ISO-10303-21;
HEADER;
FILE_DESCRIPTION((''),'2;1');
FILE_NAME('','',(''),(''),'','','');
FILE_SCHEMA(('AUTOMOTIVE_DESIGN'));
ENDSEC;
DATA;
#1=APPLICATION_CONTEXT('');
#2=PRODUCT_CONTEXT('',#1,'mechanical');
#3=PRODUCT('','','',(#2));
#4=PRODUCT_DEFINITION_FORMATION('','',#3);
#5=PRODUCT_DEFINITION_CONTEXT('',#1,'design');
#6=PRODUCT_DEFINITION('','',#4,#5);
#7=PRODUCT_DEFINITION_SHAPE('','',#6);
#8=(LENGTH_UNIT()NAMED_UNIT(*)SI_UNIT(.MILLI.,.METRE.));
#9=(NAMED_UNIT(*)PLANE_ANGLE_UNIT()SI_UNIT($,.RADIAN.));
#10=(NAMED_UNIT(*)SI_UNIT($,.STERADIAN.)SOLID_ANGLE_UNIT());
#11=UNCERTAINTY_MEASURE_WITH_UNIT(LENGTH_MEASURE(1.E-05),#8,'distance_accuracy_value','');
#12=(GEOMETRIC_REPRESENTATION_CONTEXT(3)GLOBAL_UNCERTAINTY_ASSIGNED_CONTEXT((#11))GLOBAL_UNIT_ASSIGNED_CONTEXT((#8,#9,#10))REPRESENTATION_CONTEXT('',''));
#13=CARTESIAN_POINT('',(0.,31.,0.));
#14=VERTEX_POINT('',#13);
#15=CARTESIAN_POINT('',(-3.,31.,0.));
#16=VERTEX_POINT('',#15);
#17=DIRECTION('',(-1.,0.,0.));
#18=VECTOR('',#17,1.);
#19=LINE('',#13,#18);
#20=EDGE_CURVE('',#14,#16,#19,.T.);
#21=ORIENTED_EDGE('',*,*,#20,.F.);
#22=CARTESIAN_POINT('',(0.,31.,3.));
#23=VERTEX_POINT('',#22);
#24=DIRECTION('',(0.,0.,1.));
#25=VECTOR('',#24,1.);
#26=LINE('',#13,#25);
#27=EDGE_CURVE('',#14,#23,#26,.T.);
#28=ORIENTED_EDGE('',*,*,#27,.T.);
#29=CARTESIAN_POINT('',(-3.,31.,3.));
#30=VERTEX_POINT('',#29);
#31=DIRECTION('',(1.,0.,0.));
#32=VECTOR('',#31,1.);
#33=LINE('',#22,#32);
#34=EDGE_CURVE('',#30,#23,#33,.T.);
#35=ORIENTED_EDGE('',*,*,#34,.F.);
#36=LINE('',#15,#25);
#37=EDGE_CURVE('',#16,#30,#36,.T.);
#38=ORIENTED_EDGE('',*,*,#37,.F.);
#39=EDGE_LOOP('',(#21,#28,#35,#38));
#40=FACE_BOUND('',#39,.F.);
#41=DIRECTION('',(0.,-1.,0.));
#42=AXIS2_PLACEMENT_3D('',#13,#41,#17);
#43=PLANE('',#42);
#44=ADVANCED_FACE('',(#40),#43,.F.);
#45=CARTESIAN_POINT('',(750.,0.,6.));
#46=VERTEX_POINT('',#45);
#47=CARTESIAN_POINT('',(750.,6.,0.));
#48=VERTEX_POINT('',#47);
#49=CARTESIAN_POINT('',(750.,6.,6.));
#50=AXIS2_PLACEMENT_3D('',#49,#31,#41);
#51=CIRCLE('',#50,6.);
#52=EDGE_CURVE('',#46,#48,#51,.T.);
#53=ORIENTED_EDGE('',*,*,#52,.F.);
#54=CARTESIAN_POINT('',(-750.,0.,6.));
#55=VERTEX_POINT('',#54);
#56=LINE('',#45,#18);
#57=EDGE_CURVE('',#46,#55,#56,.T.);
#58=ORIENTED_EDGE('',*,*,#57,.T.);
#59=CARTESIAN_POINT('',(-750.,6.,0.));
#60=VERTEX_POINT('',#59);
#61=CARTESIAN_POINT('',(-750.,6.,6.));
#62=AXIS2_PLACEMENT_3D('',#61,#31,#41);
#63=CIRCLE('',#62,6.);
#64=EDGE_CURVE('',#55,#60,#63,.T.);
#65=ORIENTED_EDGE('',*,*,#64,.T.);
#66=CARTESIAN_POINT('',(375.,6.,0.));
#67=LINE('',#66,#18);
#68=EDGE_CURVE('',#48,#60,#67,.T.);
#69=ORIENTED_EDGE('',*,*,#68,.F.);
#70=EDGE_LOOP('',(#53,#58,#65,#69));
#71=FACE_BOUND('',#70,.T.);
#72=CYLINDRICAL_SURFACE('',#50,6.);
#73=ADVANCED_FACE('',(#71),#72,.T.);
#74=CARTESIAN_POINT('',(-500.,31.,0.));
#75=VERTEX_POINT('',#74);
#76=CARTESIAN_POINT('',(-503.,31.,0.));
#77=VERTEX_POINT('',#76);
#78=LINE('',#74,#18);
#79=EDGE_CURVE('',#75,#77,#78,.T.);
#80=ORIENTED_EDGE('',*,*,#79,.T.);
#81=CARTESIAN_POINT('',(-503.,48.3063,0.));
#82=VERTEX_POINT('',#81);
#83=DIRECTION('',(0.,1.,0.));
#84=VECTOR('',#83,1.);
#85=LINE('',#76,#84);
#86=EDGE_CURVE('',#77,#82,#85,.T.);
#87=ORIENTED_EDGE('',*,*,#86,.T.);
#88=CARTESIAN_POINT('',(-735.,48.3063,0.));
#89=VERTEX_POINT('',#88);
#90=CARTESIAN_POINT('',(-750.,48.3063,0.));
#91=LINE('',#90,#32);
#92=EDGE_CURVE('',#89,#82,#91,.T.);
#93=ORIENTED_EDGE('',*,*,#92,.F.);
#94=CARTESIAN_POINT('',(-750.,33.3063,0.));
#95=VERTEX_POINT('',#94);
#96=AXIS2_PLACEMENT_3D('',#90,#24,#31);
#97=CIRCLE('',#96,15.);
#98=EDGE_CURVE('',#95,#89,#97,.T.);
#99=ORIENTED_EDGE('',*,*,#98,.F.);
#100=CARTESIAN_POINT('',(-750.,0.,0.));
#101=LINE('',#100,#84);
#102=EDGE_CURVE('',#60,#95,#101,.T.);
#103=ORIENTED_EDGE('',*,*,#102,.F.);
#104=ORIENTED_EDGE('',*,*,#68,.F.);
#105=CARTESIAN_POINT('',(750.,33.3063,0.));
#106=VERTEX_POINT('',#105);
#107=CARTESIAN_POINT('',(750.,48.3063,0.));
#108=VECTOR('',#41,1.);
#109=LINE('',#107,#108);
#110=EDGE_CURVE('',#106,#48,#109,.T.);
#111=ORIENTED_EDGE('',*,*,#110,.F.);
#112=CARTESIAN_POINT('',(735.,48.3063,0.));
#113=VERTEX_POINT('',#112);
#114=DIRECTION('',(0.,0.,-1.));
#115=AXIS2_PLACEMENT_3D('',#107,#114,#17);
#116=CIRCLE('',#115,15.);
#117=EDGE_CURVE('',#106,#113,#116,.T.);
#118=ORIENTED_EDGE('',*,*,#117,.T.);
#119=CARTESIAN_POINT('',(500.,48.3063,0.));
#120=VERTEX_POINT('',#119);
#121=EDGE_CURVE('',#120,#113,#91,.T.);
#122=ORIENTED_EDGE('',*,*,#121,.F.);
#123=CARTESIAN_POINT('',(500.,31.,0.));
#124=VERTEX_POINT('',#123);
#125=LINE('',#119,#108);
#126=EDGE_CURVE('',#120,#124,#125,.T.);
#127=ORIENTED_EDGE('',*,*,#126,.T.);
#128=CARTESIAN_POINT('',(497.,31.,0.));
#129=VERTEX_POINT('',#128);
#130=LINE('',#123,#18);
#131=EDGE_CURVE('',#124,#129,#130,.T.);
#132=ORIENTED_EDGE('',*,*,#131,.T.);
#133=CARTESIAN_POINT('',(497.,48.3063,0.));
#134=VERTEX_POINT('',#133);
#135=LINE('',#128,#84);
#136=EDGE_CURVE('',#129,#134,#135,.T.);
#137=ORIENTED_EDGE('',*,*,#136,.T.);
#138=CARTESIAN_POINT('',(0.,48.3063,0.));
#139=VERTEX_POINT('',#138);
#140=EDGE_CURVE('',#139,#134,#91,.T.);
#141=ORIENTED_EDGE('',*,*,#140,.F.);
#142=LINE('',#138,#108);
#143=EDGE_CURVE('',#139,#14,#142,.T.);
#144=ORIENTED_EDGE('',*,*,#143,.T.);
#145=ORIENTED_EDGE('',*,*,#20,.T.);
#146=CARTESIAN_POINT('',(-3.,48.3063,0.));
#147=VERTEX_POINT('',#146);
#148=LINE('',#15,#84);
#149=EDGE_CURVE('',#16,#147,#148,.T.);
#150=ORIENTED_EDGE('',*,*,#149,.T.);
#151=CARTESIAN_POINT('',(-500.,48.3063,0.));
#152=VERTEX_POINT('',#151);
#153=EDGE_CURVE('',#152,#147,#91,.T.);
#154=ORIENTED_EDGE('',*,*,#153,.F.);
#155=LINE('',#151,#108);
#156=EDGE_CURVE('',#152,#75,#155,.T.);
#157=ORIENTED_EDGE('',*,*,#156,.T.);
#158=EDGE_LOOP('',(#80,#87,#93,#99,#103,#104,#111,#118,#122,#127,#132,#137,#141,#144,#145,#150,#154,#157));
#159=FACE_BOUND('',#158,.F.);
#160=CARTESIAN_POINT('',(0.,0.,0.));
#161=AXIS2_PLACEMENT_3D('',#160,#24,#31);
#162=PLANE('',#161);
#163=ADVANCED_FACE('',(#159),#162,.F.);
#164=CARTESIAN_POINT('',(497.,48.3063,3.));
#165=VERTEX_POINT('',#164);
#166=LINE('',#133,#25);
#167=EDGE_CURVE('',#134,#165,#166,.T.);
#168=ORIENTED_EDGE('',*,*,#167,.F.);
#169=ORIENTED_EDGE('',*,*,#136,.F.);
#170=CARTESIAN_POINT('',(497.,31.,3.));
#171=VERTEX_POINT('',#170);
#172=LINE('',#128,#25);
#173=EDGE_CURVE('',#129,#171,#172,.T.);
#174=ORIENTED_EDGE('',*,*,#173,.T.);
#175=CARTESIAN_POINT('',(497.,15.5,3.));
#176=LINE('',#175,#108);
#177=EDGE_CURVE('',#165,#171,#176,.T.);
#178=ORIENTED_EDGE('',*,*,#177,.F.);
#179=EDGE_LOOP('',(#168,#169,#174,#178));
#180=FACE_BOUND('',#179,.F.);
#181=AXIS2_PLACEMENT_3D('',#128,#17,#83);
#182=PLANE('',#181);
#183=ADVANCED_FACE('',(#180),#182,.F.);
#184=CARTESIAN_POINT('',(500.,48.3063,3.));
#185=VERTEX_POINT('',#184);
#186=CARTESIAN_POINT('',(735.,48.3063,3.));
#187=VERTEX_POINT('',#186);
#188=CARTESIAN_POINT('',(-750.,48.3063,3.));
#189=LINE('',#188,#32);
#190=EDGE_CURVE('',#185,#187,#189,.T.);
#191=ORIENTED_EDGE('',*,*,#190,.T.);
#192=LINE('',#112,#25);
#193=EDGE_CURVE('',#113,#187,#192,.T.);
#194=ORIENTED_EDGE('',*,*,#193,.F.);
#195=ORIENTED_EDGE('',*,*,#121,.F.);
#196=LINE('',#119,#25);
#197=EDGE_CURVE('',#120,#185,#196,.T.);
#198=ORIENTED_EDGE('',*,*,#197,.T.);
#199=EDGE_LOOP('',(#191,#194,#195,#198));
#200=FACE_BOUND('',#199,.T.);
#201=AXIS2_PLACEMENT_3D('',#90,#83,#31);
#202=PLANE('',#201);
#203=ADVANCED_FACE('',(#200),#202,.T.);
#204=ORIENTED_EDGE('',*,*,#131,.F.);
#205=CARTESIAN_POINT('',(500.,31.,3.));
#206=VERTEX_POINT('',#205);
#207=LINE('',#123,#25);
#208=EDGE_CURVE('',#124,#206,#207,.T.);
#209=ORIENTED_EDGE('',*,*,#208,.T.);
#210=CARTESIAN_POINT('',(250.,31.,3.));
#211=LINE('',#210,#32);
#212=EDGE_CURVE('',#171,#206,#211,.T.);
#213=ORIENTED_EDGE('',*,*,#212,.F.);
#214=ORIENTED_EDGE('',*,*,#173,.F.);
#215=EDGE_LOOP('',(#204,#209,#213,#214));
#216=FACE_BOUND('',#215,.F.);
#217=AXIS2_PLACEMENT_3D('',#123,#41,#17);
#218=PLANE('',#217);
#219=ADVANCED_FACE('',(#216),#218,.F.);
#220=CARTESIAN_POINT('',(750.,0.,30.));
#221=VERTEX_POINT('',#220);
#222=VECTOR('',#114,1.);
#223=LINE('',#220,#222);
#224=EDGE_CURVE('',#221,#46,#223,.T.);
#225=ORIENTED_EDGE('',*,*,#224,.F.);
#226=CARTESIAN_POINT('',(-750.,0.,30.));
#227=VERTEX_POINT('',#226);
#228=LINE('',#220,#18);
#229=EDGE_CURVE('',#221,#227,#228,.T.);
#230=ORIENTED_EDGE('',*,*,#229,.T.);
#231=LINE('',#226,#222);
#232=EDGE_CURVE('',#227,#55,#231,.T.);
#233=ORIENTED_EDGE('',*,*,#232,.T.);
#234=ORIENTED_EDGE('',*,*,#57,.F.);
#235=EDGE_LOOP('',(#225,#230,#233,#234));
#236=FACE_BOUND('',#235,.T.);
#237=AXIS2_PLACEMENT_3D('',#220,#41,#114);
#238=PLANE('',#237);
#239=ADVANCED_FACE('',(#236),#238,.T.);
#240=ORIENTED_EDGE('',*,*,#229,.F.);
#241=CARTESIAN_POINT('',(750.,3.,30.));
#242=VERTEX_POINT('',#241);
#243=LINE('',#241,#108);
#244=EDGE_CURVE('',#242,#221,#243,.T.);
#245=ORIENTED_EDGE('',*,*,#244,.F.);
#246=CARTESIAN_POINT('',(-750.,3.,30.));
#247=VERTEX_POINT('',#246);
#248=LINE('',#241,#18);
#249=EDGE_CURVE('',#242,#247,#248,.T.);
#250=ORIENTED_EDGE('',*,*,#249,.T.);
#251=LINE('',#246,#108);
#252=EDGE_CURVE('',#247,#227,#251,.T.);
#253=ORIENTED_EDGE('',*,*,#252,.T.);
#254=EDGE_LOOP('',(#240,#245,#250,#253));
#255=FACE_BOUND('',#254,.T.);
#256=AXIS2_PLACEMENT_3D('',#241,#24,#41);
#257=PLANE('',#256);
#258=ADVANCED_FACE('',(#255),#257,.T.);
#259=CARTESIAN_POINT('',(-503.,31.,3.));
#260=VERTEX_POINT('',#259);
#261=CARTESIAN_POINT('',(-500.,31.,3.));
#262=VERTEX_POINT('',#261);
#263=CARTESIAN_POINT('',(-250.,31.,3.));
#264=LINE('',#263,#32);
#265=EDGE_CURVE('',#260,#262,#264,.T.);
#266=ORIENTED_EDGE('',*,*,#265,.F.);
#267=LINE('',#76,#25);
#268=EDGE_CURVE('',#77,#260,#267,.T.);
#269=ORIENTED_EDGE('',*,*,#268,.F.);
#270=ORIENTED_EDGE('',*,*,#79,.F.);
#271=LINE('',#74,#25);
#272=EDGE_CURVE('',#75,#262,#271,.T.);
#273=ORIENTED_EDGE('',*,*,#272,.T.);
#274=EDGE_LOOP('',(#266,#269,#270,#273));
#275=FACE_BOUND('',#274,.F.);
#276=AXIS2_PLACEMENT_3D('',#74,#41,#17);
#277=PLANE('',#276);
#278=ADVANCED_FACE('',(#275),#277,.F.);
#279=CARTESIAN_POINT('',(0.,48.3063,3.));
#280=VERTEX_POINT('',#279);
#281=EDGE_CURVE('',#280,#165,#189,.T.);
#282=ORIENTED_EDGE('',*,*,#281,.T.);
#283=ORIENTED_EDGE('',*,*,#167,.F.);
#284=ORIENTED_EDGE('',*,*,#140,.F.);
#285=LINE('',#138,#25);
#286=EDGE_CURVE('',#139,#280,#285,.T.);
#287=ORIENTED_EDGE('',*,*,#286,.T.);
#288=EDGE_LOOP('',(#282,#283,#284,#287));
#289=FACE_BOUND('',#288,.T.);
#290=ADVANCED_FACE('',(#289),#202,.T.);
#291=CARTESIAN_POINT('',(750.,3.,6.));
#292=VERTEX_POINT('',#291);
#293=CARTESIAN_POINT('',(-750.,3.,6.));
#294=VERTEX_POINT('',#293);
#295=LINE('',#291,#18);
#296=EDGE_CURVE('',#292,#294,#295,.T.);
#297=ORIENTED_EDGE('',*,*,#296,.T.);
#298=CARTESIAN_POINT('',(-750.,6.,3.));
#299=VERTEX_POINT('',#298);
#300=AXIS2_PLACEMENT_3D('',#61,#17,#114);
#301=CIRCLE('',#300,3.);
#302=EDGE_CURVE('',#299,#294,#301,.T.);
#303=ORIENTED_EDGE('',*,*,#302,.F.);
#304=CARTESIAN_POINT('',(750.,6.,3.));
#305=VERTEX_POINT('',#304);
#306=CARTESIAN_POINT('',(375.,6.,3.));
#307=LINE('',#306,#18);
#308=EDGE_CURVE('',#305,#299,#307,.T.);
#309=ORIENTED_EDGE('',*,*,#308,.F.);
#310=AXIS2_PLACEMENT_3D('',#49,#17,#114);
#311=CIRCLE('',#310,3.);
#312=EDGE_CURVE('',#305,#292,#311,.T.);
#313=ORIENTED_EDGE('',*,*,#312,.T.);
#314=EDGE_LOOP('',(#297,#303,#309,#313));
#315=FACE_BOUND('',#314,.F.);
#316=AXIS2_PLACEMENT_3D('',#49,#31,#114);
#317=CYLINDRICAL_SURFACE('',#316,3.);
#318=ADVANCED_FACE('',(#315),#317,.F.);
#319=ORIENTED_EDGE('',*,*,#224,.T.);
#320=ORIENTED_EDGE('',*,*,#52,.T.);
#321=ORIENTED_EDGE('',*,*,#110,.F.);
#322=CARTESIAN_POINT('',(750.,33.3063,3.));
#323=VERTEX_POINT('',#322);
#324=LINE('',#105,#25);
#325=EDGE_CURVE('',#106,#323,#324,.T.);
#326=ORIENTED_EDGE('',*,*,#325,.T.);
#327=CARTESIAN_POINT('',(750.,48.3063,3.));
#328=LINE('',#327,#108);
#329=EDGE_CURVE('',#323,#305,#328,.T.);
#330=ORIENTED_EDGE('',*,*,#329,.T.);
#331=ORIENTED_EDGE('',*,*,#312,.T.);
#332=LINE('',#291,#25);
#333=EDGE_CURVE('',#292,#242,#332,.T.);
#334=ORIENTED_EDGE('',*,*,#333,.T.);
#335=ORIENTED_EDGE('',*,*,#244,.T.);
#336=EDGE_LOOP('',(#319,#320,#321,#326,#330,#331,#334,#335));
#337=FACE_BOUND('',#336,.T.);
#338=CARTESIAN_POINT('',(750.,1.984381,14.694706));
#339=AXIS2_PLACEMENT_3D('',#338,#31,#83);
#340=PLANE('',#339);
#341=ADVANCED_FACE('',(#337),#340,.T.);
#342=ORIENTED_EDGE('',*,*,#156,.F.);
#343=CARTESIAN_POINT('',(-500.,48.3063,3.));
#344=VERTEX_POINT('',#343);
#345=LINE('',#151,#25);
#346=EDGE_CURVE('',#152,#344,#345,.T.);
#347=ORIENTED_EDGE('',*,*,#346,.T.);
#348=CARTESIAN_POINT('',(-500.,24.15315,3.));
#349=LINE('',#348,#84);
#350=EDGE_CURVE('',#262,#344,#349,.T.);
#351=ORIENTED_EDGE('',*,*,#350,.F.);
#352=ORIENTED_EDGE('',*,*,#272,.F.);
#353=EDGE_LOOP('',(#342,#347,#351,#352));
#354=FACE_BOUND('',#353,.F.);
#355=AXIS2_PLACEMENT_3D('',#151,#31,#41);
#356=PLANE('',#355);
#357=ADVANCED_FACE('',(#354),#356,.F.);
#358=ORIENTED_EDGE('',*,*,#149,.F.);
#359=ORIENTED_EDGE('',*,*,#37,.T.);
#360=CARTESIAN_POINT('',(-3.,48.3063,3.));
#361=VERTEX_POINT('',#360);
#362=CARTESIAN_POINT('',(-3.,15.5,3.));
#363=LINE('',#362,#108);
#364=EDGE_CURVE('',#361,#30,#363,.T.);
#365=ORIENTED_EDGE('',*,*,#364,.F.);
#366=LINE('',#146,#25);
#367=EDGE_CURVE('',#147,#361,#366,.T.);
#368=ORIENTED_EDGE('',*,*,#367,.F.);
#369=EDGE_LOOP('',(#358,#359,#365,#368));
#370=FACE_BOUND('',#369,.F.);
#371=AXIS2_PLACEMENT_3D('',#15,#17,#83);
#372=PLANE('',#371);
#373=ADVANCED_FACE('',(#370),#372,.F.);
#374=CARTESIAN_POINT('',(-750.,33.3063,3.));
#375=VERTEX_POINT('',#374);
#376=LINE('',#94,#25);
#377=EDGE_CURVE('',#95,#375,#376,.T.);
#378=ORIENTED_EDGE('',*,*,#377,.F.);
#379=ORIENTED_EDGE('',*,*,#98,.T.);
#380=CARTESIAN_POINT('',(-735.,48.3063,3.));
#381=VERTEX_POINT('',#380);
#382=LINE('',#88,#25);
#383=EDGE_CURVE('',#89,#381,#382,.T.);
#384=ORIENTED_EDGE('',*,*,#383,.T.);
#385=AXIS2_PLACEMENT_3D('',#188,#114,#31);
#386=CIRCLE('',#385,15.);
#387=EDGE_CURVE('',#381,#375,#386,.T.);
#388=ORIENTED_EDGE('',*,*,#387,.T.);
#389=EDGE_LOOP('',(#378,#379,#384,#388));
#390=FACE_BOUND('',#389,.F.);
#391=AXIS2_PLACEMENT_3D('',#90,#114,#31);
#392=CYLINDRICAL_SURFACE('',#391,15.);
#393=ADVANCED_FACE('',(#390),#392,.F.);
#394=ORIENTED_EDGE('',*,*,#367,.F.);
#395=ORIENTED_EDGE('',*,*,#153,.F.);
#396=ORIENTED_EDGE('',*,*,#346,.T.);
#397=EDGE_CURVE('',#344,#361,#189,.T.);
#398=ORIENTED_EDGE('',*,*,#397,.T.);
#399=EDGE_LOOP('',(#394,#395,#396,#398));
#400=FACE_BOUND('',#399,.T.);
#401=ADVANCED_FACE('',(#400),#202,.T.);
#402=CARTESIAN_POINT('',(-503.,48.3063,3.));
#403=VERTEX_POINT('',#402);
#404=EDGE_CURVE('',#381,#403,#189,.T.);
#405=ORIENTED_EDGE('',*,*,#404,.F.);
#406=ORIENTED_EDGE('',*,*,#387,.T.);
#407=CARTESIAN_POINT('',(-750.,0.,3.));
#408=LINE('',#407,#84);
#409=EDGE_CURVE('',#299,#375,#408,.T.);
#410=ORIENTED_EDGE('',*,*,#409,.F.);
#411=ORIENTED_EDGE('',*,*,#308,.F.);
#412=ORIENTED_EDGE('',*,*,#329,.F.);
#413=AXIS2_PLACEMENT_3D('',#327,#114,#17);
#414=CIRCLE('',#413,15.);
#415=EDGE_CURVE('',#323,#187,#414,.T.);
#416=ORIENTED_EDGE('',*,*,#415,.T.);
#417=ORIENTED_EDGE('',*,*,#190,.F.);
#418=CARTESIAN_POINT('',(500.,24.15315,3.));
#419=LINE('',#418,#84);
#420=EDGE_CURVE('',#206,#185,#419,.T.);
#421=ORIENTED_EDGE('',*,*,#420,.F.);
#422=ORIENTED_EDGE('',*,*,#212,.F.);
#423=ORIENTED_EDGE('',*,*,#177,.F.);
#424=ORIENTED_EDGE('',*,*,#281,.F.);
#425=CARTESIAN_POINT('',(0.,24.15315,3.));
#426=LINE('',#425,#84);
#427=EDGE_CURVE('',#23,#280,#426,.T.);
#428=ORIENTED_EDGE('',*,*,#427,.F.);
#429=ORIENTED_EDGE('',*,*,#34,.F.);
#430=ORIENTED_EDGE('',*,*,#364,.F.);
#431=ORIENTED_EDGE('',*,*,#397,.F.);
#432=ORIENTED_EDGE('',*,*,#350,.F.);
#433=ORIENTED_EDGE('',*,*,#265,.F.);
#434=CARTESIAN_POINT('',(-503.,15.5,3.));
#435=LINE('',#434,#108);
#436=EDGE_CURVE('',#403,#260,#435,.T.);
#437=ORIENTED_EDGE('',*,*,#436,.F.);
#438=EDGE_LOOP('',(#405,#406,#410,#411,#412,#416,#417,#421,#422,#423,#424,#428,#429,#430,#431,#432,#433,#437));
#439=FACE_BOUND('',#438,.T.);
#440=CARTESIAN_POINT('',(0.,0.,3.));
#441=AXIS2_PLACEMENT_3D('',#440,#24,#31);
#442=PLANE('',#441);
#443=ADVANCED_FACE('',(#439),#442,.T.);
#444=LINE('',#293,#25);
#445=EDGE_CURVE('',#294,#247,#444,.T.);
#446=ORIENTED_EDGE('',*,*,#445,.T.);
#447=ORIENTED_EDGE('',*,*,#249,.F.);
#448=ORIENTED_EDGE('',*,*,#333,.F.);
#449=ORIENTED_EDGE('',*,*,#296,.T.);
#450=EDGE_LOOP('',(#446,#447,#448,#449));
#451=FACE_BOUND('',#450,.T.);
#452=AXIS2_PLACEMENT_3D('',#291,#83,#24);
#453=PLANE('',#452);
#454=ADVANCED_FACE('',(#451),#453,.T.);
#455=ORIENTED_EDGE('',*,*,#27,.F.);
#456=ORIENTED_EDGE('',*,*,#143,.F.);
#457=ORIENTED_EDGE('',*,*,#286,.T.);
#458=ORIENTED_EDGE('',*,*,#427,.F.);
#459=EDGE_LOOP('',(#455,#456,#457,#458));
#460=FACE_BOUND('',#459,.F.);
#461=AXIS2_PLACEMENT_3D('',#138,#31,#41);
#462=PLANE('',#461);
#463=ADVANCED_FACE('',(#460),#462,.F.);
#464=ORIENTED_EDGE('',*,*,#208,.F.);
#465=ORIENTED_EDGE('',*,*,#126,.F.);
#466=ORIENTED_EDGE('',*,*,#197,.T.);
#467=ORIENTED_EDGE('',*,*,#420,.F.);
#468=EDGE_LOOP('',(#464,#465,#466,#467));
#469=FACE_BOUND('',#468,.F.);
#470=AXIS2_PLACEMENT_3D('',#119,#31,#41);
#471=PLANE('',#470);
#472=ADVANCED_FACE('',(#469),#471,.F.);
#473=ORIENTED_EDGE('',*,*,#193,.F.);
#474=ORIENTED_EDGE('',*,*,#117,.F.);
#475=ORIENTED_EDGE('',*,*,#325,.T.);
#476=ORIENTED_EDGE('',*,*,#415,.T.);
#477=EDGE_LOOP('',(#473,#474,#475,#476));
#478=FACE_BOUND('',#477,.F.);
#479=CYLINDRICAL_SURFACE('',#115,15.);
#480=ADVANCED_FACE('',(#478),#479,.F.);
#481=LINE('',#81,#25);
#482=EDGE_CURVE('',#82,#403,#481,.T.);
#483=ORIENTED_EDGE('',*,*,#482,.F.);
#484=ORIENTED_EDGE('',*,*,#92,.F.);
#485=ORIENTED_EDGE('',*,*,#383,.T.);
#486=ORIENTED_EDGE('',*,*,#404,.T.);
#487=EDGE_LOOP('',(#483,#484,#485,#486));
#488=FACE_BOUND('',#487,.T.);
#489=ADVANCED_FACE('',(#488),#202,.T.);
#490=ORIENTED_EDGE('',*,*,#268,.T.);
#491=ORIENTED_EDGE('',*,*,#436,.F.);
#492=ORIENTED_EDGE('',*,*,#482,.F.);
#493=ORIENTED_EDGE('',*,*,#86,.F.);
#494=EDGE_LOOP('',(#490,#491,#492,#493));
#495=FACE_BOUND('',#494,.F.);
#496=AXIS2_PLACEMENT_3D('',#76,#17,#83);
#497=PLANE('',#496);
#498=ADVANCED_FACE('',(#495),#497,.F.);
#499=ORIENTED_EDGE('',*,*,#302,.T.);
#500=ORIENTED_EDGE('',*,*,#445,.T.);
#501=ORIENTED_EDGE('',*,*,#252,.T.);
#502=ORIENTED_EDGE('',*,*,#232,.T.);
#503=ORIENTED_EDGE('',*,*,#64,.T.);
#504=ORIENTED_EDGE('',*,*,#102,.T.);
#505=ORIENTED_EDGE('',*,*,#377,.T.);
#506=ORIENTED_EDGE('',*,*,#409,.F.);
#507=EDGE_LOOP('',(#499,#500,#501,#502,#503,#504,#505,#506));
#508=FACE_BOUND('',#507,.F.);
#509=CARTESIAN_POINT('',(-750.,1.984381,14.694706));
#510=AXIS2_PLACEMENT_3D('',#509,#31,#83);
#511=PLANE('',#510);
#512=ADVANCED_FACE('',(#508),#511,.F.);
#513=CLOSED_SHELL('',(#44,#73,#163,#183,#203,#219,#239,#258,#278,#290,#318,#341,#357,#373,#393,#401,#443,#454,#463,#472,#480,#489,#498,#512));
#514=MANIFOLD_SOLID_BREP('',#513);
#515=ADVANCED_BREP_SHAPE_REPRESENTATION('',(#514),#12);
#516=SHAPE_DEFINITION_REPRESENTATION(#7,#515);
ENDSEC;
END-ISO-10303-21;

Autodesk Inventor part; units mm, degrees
ref_plane "YZ Plane" through (0, 0, 0) normal (1, 0, 0) x (0, 1, 0)
ref_plane "XZ Plane" through (0, 0, 0) normal (0, 1, 0) x (-1, 0, 0)
ref_plane "XY Plane" through (0, 0, 0) normal (0, 0, 1) x (1, 0, 0)
sketch "Sketch1" plane through (0, 0, 0) normal (0, 0, 1) x (1, 0, 0)
  line L0 (-750, 48.3063) -> (750, 48.3063)
  line L1 (750, 48.3063) -> (750, 0)
  line L2 (750, 0) -> (-750, 0)
  line L3 (-750, 0) -> (-750, 48.3063)
  point P0 (0, 0)
  point P1 (0, 0)
  dimension "d0" = 1500
  dimension "d1" = 48.3063
extrude "Plate1" add sketch "Sketch1" along normal blind 3
sketch "Sketch2" plane through (750, 3, 0) normal (0, -1, 0) x (1, 0, 0)
  line L0 (-1500, 0) -> (0, 0)
  line L1 (0, 0) -> (0, 30)
  line L2 (0, 30) -> (-1500, 30)
  line L3 (-1500, 30) -> (-1500, 0)
edge flange "Flange1" height 30 angle 90 thickness 3 bend radius 3 thickness toward (0, -1, 0) relief tear relief width 3 relief depth 1.5 edges at (0, 0, 3) wall of the first edge with corners at (-750, 3, 0) (750, 3, 0) (750, 3, 30) (-750, 3, 30)
bend "Bend1"
corner "Corner1"
sketch "Sketch5" plane through (0, 0, 0) normal (0, 0, -1) x (-1, 0, 0)
  line L0 (750, 48.3063) -> (-750, 48.3063) projected
  line L1 (500, 48.3063) -> (500, 31)
  line L2 (500, 31) -> (503, 31)
  line L3 (503, 31) -> (503, 48.3063)
  line L4 (750, 0) -> (-750, 0) projected
  point P0 (0, 0)
  dimension "d18" = 3
  dimension "d19" = 247
  dimension "d20" = 31
extrude "Extrusion1" cut sketch "Sketch5" against normal through all
pattern_linear "Rectangular Pattern1" count 3 spacing 500 along (1, 0, 0) of "Extrusion1"
sketch "Sketch6" plane through (0, 0, 0) normal (0, 0, -1) x (-1, 0, 0)
  line L0 (-750, 48.3063) -> (-750, 6) projected
  circle A0 centre (-750, 48.3063) radius 15
  line L1 (-750, 48.3063) -> (-500, 48.3063) projected
  point P0 (0, 0)
  point P1 (-735, 48.3063)
  point P2 (-750, 33.3063)
  dimension "d24" = 30
extrude "Extrusion2" cut sketch "Sketch6" against normal through all contours L1 A0 L0 picked at (-740.1254, 47.1937)
mirror "Mirror1" about plane through (0, 0, 0) normal (1, 0, 0) of "Extrusion2"
equation "\"d1\" = Стрингер_4"
equation "\"d18\" = Thickness"
equation "\"d2\" = Thickness"
equation "\"d3\" = BendReliefWidth"
equation "\"d4\" = BendReliefDepth"
equation "\"d5\" = MinimumRemnant"
equation "\"d6\" = TransitionRadius"
equation "\"d9\" = BendRadius"
equation "\"d10\" = CornerReliefSize"
equation "\"d11\" = GapSize"
equation "\"d12\" = JacobiRadiusSize"
equation "\"BendRadius\" = Thickness"
equation "\"BendReliefWidth\" = Thickness"
equation "\"BendReliefDepth\" = 0.5 * Thickness"
equation "\"CornerReliefSize\" = 4 * Thickness"
equation "\"MinimumRemnant\" = 2 * Thickness"
equation "\"TransitionRadius\" = BendRadius"
equation "\"JacobiRadiusSize\" = BendRadius"
equation "\"GapSize\" = Thickness"
equation "\"Стрингер_4\" = 48.306299"
equation "\"Thickness\" = 3"
properties part number "МОО 054 стрингер борт 4"
